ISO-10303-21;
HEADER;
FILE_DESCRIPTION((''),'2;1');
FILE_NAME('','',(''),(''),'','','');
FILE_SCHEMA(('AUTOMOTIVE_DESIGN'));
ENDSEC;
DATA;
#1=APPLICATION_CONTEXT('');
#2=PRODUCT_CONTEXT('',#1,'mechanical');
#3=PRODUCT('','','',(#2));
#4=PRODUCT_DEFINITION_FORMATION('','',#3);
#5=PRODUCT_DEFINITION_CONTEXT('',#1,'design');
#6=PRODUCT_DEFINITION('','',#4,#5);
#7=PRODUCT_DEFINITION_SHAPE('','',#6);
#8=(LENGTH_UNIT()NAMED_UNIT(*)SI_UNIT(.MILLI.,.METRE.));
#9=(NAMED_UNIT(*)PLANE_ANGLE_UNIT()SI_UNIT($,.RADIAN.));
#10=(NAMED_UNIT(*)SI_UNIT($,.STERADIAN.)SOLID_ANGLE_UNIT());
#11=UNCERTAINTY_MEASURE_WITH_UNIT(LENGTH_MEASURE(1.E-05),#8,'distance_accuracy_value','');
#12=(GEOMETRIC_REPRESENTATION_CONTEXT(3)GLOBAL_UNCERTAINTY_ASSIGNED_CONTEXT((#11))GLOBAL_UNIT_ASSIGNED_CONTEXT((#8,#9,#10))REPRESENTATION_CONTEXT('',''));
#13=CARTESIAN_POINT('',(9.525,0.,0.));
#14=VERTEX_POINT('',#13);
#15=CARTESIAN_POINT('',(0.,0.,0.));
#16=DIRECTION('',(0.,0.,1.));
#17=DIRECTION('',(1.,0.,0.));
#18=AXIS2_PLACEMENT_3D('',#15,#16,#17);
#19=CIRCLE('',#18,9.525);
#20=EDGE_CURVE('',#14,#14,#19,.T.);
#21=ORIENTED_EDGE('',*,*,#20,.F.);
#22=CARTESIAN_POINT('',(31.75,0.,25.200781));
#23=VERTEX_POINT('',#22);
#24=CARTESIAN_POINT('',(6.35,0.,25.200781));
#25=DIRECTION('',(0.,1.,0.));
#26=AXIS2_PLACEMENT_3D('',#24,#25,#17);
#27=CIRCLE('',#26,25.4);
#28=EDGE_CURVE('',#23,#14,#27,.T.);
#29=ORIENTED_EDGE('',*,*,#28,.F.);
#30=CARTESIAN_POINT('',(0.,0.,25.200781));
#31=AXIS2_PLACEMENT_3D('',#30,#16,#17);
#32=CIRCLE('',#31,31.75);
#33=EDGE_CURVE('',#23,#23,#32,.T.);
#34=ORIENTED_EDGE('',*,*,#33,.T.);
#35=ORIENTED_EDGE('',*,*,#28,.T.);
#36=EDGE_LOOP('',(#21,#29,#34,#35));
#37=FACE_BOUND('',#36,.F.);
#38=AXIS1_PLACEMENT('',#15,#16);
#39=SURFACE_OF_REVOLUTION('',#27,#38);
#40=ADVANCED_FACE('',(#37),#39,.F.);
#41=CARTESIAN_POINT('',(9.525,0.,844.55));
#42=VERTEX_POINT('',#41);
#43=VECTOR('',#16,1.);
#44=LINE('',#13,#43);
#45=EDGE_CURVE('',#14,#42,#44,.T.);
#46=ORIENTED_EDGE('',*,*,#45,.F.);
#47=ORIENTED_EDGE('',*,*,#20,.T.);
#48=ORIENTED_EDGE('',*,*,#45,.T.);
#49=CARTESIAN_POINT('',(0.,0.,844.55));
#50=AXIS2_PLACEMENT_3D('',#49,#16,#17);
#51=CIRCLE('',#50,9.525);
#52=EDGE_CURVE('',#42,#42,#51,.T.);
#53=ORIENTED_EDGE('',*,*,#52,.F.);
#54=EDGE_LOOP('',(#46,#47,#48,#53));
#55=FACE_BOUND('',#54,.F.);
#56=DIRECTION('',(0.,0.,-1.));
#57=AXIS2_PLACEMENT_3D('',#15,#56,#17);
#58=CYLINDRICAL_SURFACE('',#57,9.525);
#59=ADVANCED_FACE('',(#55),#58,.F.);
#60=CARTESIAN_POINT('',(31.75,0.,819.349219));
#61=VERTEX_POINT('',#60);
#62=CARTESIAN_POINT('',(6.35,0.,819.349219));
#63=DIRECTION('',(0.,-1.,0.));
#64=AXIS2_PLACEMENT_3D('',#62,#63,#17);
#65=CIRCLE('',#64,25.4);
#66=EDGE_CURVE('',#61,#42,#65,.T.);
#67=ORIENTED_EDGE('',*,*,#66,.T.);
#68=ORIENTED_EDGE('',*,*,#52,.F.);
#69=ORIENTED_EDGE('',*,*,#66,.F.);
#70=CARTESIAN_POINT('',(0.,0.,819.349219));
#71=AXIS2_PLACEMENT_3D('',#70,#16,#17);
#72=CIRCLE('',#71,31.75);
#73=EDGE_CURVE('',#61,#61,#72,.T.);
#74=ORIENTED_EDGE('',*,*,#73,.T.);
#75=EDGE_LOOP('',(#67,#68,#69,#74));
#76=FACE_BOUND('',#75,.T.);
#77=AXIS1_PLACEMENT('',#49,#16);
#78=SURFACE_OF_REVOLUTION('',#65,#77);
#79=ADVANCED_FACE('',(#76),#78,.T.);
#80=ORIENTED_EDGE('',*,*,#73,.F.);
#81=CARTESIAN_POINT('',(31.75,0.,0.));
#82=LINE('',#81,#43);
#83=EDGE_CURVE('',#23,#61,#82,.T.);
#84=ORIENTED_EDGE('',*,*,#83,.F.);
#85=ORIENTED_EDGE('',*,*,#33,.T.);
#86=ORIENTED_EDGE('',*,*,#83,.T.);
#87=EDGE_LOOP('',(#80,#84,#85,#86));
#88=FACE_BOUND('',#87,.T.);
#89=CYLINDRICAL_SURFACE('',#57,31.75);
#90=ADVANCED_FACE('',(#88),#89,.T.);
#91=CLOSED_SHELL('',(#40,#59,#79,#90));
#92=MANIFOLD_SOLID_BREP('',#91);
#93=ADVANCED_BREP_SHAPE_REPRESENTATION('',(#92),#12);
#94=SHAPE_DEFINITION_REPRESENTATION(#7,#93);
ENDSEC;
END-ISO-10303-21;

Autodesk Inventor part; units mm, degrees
ref_plane "YZ Plane" through (0, 0, 0) normal (1, 0, 0) x (0, 1, 0)
ref_plane "XZ Plane" through (0, 0, 0) normal (0, 1, 0) x (-1, 0, 0)
ref_plane "XY Plane" through (0, 0, 0) normal (0, 0, 1) x (1, 0, 0)
sketch "Sketch1" plane through (0, 0, 0) normal (0, 0, 1) x (1, 0, 0)
  circle A0 centre (0, 0) radius 31.75
  circle A1 centre (0, 0) radius 9.525
  dimension "d0" = 63.5
  dimension "d1" = 19.05
extrude "Extrusion1" add sketch "Sketch1" along normal blind 844.55
fillet "Fillet1" radius 25.4 2 edges at (-31.75, 0, 844.55) (-31.75, 0, 0)
properties part number "Pool Noodle Part2 (24x28 robot)"
